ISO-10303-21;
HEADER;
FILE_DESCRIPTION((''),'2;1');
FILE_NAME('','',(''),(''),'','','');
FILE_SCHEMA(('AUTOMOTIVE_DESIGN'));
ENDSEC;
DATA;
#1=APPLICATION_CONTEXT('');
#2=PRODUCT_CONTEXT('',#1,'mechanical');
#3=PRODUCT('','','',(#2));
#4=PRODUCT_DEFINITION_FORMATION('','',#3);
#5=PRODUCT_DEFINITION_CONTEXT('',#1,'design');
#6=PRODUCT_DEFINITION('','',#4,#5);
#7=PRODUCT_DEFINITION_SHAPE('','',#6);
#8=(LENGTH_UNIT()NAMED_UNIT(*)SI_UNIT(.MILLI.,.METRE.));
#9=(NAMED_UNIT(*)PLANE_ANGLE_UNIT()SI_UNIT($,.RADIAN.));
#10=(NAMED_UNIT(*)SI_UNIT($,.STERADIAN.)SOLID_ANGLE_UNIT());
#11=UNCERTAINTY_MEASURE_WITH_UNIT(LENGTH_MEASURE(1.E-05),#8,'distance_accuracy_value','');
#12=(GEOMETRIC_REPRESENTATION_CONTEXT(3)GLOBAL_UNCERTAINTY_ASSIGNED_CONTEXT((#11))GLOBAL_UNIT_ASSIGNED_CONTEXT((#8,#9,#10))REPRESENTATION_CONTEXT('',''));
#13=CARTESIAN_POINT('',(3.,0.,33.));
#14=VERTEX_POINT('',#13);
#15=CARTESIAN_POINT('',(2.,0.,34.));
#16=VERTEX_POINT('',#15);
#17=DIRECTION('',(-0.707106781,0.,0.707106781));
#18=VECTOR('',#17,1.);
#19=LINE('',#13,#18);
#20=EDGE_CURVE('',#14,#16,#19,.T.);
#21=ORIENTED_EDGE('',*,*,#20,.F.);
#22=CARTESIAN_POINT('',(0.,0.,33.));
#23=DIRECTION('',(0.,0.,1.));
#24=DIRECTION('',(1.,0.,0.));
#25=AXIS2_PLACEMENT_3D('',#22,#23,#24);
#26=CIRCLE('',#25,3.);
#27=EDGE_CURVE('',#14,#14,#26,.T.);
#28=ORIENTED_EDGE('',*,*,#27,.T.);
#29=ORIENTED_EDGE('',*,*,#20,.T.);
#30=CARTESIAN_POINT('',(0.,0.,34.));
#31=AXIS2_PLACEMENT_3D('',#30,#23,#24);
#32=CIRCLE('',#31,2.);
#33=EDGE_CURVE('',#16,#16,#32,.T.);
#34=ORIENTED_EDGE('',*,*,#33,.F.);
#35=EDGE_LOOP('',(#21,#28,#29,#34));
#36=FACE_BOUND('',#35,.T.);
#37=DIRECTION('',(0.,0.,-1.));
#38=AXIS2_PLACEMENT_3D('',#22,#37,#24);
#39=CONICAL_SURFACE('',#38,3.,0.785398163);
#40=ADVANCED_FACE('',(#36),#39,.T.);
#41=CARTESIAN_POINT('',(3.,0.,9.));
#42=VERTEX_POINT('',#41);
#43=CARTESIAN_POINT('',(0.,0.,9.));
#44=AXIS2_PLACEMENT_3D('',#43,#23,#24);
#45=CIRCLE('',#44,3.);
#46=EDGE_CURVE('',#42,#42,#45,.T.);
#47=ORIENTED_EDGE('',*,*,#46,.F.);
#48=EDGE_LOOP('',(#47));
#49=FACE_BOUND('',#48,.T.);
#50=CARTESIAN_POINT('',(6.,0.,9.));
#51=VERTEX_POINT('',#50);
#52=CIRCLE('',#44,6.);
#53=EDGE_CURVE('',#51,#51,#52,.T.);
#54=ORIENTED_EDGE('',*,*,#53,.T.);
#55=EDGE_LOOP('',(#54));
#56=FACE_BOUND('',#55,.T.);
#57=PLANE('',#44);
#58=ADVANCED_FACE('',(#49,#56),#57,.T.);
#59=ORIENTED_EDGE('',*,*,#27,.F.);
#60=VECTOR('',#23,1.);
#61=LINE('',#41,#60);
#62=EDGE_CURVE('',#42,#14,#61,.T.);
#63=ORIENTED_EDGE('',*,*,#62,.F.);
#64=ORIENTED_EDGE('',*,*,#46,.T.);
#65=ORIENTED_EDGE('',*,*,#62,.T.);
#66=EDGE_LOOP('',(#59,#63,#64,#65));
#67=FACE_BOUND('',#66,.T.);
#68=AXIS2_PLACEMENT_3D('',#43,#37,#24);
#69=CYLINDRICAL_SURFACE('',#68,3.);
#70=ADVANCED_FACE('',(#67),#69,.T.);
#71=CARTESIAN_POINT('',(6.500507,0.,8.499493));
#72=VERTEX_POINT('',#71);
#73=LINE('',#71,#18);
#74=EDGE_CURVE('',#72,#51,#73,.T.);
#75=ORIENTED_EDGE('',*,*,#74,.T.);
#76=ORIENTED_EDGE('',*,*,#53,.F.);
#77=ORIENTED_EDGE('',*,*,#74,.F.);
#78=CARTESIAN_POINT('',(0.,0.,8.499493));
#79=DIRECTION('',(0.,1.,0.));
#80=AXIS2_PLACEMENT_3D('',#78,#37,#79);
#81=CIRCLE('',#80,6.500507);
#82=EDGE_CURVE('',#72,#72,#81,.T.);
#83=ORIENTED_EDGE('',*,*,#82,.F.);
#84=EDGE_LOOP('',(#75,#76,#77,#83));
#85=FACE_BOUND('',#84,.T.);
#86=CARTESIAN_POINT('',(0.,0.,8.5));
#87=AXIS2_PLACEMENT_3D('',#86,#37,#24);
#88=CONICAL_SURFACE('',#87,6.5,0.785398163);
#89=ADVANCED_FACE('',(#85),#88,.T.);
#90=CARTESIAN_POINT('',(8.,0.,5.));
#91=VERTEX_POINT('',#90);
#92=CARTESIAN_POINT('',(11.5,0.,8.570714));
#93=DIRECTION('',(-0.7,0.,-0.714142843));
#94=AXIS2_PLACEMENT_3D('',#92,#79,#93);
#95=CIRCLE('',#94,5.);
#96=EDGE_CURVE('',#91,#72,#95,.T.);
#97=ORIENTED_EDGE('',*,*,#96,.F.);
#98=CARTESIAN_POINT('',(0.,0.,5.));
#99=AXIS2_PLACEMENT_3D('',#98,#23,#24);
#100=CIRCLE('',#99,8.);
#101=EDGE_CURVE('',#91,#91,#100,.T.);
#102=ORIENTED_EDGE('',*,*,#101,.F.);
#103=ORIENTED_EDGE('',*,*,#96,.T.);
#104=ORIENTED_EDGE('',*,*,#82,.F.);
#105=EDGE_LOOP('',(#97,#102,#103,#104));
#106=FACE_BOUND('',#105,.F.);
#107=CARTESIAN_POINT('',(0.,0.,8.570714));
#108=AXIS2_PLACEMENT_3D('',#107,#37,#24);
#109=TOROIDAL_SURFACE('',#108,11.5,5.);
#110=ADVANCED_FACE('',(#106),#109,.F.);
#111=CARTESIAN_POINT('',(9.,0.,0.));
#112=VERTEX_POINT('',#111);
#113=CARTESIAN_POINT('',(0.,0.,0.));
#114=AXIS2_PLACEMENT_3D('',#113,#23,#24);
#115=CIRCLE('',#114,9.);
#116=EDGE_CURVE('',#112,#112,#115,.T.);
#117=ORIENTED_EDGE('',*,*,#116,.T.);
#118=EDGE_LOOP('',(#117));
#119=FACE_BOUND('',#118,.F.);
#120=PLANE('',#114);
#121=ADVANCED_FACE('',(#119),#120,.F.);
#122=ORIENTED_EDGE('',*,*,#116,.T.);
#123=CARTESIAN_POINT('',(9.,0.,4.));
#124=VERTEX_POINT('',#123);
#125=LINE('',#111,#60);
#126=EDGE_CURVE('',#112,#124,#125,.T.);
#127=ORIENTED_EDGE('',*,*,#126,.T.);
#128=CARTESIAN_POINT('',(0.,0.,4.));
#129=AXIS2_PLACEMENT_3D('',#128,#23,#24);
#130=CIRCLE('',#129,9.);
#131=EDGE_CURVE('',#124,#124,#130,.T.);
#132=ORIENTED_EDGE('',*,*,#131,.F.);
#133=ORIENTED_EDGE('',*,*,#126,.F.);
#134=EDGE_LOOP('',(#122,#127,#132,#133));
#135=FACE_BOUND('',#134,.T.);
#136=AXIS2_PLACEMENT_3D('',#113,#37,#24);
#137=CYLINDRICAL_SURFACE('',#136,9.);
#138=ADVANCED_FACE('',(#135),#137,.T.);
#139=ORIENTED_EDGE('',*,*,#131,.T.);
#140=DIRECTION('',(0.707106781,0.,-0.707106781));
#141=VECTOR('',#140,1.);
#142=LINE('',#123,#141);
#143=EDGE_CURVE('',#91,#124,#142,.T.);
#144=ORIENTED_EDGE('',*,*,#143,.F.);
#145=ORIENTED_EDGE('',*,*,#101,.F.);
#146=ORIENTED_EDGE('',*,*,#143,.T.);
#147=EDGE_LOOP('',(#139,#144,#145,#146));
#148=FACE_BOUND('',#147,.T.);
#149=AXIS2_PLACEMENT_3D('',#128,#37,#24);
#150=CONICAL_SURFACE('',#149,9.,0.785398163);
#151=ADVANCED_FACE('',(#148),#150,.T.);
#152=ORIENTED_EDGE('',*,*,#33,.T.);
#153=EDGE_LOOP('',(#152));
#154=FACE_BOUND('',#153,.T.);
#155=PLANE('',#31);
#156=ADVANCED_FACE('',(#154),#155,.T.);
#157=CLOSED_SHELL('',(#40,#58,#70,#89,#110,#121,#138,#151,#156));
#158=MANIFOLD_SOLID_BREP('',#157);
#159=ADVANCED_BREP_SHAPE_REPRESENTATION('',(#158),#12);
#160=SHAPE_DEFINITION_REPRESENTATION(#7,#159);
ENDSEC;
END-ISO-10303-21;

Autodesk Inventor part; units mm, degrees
ref_plane "YZ Plane" through (0, 0, 0) normal (1, 0, 0) x (0, 1, 0)
ref_plane "XZ Plane" through (0, 0, 0) normal (0, 1, 0) x (-1, 0, 0)
ref_plane "XY Plane" through (0, 0, 0) normal (0, 0, 1) x (1, 0, 0)
sketch "Esboço2" plane through (0, 0, 0) normal (0, 0, 1) x (1, 0, 0)
  circle A0 centre (0, 0) radius 9
  dimension "d10" = 18
extrude "Extrusão1" add sketch "Esboço2" along normal blind 5
sketch "Esboço3" plane through (0, 0, 5) normal (0, 0, 1) x (1, 0, 0)
  circle A0 centre (0, 0) radius 6.5
  dimension "d13" = 13
extrude "Extrusão2" add sketch "Esboço3" along normal blind 4
sketch "Esboço4" plane through (0, 0, 9) normal (0, 0, 1) x (1, 0, 0)
  circle A0 centre (0, 0) radius 3
  dimension "d17" = 6
extrude "Extrusão3" add sketch "Esboço4" along normal blind 25
chamfer "Chanfro2" distance 1 angle 45 1 edges at (-3, 0, 34)
chamfer "Chanfro3" distance 0.5 angle 45 1 edges at (-6.5, 0, 9)
thread "Rosca1" size "M6x1" class "6g" standard "ISO Metric profile" length 25 offset 3
chamfer "Chanfro5" distance 1 angle 45 1 edges at (-9, 0, 5)
fillet "Arredondamento1" radius 5 1 edges at (-6.5, 0, 5)
properties part number "maniplo" material "Aço, carbono"
